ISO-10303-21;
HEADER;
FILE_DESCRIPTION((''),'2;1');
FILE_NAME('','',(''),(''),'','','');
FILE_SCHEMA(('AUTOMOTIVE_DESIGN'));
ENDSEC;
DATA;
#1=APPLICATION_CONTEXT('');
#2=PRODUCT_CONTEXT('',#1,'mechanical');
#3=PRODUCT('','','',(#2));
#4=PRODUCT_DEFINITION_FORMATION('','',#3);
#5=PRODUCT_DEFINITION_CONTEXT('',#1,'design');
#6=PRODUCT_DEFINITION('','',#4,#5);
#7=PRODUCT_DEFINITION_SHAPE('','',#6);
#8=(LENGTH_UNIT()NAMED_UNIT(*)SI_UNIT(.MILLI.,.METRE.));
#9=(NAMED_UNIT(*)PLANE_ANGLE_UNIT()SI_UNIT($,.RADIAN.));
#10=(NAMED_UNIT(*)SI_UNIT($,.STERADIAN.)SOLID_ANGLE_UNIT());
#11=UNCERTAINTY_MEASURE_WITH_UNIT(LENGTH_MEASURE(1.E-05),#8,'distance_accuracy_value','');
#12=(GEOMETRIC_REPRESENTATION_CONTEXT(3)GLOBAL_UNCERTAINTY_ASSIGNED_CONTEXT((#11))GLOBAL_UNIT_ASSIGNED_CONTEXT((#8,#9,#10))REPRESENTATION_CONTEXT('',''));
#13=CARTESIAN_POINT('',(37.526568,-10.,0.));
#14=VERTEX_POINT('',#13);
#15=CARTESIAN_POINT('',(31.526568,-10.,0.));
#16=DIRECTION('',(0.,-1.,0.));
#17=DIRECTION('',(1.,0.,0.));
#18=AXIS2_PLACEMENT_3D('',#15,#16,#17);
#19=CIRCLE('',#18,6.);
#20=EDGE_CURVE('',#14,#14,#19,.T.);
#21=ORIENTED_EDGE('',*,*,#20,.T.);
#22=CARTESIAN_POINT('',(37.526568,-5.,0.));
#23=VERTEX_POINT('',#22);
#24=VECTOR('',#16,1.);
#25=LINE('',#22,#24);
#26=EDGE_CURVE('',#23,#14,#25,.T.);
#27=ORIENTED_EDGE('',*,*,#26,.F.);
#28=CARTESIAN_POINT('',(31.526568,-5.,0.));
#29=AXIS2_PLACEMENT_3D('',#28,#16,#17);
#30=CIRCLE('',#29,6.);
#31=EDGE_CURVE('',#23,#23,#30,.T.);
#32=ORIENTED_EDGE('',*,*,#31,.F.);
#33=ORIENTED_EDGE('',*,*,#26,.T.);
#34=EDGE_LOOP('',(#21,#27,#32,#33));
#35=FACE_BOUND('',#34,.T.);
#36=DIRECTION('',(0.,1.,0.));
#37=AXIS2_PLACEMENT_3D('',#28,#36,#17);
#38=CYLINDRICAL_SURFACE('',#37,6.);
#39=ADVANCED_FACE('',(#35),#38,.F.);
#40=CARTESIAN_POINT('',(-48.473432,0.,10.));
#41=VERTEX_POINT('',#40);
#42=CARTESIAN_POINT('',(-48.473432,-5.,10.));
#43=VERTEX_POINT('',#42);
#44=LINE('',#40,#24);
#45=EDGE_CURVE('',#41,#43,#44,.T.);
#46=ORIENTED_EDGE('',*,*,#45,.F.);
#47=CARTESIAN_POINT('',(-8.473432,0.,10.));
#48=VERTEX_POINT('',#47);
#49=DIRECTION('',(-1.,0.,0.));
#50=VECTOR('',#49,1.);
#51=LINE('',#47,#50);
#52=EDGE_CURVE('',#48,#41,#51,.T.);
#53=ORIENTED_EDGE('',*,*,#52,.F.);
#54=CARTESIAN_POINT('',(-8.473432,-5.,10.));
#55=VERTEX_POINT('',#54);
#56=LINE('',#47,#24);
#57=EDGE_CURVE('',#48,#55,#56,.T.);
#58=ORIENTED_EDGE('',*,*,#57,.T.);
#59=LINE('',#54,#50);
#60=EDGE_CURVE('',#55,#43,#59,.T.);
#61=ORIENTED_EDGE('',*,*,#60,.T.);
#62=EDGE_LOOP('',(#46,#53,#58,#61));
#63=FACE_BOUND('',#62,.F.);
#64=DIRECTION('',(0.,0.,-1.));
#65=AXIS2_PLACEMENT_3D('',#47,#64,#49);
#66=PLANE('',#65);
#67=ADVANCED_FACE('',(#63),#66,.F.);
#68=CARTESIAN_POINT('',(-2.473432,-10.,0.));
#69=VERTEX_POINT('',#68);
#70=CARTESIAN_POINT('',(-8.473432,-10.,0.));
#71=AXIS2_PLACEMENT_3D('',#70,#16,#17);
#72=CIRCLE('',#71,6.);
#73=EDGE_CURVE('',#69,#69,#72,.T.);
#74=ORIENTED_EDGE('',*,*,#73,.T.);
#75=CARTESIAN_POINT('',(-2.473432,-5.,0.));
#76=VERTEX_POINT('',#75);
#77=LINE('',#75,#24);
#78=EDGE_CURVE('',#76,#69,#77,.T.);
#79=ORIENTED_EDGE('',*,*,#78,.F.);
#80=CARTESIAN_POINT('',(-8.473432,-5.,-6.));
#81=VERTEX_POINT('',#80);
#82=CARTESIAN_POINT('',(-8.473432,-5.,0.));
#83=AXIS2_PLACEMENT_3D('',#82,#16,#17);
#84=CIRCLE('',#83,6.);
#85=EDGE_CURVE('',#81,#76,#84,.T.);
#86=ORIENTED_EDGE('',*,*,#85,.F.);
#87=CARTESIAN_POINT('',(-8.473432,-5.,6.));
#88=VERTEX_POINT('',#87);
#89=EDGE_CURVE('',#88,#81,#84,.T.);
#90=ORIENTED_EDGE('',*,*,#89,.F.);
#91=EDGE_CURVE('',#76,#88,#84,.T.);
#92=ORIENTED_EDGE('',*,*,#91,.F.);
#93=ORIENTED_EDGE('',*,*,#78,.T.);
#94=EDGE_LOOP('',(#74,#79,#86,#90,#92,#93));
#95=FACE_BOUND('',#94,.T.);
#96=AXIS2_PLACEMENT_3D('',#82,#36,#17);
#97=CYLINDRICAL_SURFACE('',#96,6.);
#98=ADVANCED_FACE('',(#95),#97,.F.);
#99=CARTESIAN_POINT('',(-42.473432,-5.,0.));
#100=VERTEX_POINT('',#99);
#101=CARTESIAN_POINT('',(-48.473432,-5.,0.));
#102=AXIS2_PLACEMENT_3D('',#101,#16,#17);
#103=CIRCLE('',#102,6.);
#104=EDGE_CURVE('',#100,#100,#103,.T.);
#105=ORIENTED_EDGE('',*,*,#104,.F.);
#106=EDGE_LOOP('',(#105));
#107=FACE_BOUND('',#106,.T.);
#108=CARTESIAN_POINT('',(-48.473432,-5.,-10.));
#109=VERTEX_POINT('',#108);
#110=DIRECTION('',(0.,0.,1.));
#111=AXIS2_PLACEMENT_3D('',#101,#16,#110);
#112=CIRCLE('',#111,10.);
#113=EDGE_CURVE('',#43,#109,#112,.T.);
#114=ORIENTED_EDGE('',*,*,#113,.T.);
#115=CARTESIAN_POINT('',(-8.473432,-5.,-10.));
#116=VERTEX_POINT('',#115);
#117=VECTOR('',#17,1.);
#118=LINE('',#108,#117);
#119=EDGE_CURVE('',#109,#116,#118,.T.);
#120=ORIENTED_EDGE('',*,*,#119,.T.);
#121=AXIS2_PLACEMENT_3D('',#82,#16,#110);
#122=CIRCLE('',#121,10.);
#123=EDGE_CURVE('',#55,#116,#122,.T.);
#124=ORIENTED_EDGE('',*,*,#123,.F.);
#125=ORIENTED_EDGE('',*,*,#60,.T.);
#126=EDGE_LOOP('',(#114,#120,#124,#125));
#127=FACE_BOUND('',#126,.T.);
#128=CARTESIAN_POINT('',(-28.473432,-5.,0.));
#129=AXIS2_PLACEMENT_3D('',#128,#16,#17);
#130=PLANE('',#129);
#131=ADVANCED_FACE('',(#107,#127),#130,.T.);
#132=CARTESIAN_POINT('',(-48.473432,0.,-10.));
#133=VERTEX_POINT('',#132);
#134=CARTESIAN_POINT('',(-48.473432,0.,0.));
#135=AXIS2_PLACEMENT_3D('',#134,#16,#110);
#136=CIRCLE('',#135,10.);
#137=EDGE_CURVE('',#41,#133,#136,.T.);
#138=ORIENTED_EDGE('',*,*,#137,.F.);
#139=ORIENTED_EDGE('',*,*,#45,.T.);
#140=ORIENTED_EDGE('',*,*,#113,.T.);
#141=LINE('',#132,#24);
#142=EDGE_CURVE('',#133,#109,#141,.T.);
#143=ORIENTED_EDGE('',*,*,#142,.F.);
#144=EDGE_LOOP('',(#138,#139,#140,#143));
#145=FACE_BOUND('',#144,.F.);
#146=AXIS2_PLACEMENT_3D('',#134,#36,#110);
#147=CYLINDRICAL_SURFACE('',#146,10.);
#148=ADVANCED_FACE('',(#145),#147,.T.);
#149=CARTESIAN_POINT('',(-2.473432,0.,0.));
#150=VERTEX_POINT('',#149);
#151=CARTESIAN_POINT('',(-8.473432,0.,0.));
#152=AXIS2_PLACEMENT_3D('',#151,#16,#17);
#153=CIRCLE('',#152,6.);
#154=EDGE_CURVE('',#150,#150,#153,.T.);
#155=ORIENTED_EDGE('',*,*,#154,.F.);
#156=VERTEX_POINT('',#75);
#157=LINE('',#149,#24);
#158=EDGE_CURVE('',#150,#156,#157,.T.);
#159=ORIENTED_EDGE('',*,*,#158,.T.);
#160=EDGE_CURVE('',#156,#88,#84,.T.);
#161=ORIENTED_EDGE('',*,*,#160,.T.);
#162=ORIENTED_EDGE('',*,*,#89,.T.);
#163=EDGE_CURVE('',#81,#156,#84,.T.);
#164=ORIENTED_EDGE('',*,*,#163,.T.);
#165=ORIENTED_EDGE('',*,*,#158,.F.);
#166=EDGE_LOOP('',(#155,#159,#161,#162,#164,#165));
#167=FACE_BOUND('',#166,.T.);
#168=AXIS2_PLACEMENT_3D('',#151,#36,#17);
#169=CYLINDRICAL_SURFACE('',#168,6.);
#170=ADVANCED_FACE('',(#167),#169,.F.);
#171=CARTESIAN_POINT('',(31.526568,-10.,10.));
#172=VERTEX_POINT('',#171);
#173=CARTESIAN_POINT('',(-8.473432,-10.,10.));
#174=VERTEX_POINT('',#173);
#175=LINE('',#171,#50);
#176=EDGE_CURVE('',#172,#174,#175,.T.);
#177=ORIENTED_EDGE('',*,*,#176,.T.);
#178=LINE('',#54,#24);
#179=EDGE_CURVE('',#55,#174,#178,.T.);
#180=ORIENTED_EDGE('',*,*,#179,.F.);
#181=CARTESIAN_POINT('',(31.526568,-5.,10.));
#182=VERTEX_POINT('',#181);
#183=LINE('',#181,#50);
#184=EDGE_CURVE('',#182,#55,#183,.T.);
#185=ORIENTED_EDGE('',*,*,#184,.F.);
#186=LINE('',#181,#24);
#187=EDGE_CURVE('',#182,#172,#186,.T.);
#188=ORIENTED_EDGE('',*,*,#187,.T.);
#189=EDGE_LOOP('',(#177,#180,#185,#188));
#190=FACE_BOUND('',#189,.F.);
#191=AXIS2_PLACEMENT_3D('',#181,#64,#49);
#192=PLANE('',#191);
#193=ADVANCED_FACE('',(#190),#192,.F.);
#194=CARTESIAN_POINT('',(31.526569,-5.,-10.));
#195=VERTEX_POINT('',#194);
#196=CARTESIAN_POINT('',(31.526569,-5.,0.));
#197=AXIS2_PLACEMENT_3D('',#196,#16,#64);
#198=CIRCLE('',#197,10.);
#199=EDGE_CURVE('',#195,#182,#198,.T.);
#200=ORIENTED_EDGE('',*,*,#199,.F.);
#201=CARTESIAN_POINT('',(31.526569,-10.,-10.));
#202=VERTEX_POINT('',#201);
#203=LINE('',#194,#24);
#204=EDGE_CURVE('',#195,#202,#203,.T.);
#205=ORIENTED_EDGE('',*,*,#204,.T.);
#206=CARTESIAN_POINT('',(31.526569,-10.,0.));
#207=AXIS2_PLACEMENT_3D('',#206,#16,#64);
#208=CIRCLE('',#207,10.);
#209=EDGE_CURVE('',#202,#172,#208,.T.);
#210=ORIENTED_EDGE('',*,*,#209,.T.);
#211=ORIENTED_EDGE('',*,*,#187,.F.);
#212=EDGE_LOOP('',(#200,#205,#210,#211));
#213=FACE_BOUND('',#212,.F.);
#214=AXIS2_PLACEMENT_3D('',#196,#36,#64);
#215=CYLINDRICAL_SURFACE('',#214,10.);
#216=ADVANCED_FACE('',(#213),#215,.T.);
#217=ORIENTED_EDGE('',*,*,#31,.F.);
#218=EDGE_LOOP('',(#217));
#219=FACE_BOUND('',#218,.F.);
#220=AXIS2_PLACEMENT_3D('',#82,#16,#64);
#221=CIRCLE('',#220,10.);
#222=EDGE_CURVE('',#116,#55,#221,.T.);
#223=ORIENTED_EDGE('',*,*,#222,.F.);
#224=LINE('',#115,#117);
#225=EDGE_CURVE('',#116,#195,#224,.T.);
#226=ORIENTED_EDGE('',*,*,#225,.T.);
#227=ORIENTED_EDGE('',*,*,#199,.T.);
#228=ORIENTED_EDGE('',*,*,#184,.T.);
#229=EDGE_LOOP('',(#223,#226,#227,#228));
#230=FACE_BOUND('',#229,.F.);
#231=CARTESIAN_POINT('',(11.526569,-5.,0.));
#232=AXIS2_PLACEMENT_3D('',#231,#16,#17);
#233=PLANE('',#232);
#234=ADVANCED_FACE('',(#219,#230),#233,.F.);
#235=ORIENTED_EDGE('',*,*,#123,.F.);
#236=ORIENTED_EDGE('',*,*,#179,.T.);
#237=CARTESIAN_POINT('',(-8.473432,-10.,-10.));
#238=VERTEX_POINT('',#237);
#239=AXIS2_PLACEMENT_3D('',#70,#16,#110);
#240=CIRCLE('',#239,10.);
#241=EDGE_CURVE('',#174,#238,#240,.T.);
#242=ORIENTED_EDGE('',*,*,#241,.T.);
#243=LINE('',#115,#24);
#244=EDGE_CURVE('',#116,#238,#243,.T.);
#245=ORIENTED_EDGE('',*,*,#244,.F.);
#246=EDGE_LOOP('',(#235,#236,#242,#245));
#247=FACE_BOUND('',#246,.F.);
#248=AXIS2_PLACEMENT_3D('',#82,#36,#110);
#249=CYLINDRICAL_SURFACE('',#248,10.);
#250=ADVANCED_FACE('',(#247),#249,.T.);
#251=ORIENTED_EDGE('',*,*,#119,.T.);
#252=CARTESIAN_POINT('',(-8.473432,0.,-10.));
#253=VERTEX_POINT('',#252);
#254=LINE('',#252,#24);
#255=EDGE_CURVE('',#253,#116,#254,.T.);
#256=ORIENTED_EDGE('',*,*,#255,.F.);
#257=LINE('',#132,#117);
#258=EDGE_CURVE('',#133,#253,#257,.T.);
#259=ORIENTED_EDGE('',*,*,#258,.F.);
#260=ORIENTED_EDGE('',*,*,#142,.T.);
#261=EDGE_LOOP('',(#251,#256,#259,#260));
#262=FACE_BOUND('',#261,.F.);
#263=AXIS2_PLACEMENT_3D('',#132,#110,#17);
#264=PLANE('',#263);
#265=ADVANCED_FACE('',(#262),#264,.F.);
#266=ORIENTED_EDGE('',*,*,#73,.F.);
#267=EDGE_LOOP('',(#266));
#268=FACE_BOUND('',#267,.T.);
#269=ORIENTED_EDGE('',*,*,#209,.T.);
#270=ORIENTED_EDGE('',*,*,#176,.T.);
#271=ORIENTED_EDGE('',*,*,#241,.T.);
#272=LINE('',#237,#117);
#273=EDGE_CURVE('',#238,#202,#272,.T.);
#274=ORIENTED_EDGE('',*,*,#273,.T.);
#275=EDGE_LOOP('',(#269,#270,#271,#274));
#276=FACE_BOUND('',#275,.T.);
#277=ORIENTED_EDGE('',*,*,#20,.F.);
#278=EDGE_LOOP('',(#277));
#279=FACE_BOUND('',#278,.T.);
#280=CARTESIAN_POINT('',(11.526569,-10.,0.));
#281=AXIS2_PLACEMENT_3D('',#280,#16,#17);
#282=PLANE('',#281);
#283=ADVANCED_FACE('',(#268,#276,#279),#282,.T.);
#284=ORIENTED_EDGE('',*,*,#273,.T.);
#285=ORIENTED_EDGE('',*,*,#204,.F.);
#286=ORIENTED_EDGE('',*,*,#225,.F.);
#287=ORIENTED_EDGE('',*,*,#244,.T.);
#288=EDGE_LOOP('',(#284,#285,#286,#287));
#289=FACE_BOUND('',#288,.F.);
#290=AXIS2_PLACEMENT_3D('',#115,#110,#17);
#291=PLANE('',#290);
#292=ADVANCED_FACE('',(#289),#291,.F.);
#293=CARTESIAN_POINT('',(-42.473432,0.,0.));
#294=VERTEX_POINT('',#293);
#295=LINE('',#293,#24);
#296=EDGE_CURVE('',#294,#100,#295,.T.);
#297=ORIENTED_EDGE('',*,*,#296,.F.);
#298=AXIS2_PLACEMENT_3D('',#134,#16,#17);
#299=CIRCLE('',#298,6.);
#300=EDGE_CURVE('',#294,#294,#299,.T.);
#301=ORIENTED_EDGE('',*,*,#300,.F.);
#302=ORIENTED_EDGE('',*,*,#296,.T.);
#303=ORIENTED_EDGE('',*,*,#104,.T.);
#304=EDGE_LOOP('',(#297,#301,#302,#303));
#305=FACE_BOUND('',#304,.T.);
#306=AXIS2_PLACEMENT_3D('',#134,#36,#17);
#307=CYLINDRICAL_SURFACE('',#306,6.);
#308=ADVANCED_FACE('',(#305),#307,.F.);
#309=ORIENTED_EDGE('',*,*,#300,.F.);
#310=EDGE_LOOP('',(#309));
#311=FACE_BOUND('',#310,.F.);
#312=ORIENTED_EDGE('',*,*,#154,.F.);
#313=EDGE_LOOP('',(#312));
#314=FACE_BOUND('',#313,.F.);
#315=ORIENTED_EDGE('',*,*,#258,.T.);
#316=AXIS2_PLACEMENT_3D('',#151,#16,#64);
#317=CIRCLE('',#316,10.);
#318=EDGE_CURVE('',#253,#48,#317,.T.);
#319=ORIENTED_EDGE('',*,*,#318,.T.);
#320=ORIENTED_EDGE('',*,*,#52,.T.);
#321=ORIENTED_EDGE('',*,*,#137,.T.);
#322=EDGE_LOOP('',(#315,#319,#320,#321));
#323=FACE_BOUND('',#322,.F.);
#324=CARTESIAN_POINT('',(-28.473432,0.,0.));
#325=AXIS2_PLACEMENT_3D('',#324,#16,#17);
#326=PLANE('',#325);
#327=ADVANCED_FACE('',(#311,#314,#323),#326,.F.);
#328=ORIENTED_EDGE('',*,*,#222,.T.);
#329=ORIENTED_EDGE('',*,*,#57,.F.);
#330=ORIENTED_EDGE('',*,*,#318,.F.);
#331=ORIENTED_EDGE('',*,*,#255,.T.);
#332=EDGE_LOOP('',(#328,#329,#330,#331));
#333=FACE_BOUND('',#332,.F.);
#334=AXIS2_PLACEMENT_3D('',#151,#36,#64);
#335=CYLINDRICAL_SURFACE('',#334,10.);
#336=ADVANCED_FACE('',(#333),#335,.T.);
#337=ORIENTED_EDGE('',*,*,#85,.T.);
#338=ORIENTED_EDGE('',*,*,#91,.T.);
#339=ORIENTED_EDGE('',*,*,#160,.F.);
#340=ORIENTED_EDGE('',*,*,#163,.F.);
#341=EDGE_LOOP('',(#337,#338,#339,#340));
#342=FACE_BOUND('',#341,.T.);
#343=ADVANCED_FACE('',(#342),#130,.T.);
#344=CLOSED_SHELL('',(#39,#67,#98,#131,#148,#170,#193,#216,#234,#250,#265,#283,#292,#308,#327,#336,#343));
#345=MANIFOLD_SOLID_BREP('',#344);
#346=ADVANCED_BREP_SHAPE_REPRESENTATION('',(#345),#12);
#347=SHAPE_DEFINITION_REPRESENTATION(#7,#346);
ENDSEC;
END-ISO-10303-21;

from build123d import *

# Parameters (mm, degrees)
F0_R     = 6
F1_DEPTH = 5
F2_R     = 6
F3_DEPTH = 5


# Not quite as in the source:
# - the program builds the solid bodies; features that only make, move or delete a surface that nothing else refers to are left out


with BuildPart() as f1:
    # F0 (on Front) → F1 (new body)
    with BuildSketch(Plane.XZ):
        with BuildLine():
            ThreePointArc((-8.4734316129, -10), (1.5265683871, 2.052e-07), (-8.4734320234, 10))
            Line((-8.4734320234, 10), (-48.4734320234, 10))
            ThreePointArc((-48.4734320234, 10), (-58.4734320234, 0), (-48.4734320234, -10))
            Line((-48.4734320234, -10), (-8.4734316129, -10))
        make_face()
        with Locations((-48.4734320234, 0)):
            Circle(F0_R, mode=Mode.SUBTRACT)
        with Locations((-8.4734320234, 0)):
            Circle(F0_R, mode=Mode.SUBTRACT)
    extrude(amount=F1_DEPTH)

    # F2 (on face) → F3 (join)
    with BuildSketch(Plane.XZ.offset(5)):
        with BuildLine():
            ThreePointArc((31.5265687976, -10), (41.5265687976, 2.052e-07), (31.5265683871, 10))
            Line((31.5265683871, 10), (-8.4734316129, 10))
            ThreePointArc((-8.4734316129, 10), (-18.4734316129, 0), (-8.4734316129, -10))
            Line((-8.4734316129, -10), (31.5265687976, -10))
        make_face()
        with Locations((-8.4734316129, 0)):
            Circle(F2_R, mode=Mode.SUBTRACT)
        with Locations((31.5265683871, 0)):
            Circle(F2_R, mode=Mode.SUBTRACT)
    extrude(amount=F3_DEPTH)


solid = f1.part
